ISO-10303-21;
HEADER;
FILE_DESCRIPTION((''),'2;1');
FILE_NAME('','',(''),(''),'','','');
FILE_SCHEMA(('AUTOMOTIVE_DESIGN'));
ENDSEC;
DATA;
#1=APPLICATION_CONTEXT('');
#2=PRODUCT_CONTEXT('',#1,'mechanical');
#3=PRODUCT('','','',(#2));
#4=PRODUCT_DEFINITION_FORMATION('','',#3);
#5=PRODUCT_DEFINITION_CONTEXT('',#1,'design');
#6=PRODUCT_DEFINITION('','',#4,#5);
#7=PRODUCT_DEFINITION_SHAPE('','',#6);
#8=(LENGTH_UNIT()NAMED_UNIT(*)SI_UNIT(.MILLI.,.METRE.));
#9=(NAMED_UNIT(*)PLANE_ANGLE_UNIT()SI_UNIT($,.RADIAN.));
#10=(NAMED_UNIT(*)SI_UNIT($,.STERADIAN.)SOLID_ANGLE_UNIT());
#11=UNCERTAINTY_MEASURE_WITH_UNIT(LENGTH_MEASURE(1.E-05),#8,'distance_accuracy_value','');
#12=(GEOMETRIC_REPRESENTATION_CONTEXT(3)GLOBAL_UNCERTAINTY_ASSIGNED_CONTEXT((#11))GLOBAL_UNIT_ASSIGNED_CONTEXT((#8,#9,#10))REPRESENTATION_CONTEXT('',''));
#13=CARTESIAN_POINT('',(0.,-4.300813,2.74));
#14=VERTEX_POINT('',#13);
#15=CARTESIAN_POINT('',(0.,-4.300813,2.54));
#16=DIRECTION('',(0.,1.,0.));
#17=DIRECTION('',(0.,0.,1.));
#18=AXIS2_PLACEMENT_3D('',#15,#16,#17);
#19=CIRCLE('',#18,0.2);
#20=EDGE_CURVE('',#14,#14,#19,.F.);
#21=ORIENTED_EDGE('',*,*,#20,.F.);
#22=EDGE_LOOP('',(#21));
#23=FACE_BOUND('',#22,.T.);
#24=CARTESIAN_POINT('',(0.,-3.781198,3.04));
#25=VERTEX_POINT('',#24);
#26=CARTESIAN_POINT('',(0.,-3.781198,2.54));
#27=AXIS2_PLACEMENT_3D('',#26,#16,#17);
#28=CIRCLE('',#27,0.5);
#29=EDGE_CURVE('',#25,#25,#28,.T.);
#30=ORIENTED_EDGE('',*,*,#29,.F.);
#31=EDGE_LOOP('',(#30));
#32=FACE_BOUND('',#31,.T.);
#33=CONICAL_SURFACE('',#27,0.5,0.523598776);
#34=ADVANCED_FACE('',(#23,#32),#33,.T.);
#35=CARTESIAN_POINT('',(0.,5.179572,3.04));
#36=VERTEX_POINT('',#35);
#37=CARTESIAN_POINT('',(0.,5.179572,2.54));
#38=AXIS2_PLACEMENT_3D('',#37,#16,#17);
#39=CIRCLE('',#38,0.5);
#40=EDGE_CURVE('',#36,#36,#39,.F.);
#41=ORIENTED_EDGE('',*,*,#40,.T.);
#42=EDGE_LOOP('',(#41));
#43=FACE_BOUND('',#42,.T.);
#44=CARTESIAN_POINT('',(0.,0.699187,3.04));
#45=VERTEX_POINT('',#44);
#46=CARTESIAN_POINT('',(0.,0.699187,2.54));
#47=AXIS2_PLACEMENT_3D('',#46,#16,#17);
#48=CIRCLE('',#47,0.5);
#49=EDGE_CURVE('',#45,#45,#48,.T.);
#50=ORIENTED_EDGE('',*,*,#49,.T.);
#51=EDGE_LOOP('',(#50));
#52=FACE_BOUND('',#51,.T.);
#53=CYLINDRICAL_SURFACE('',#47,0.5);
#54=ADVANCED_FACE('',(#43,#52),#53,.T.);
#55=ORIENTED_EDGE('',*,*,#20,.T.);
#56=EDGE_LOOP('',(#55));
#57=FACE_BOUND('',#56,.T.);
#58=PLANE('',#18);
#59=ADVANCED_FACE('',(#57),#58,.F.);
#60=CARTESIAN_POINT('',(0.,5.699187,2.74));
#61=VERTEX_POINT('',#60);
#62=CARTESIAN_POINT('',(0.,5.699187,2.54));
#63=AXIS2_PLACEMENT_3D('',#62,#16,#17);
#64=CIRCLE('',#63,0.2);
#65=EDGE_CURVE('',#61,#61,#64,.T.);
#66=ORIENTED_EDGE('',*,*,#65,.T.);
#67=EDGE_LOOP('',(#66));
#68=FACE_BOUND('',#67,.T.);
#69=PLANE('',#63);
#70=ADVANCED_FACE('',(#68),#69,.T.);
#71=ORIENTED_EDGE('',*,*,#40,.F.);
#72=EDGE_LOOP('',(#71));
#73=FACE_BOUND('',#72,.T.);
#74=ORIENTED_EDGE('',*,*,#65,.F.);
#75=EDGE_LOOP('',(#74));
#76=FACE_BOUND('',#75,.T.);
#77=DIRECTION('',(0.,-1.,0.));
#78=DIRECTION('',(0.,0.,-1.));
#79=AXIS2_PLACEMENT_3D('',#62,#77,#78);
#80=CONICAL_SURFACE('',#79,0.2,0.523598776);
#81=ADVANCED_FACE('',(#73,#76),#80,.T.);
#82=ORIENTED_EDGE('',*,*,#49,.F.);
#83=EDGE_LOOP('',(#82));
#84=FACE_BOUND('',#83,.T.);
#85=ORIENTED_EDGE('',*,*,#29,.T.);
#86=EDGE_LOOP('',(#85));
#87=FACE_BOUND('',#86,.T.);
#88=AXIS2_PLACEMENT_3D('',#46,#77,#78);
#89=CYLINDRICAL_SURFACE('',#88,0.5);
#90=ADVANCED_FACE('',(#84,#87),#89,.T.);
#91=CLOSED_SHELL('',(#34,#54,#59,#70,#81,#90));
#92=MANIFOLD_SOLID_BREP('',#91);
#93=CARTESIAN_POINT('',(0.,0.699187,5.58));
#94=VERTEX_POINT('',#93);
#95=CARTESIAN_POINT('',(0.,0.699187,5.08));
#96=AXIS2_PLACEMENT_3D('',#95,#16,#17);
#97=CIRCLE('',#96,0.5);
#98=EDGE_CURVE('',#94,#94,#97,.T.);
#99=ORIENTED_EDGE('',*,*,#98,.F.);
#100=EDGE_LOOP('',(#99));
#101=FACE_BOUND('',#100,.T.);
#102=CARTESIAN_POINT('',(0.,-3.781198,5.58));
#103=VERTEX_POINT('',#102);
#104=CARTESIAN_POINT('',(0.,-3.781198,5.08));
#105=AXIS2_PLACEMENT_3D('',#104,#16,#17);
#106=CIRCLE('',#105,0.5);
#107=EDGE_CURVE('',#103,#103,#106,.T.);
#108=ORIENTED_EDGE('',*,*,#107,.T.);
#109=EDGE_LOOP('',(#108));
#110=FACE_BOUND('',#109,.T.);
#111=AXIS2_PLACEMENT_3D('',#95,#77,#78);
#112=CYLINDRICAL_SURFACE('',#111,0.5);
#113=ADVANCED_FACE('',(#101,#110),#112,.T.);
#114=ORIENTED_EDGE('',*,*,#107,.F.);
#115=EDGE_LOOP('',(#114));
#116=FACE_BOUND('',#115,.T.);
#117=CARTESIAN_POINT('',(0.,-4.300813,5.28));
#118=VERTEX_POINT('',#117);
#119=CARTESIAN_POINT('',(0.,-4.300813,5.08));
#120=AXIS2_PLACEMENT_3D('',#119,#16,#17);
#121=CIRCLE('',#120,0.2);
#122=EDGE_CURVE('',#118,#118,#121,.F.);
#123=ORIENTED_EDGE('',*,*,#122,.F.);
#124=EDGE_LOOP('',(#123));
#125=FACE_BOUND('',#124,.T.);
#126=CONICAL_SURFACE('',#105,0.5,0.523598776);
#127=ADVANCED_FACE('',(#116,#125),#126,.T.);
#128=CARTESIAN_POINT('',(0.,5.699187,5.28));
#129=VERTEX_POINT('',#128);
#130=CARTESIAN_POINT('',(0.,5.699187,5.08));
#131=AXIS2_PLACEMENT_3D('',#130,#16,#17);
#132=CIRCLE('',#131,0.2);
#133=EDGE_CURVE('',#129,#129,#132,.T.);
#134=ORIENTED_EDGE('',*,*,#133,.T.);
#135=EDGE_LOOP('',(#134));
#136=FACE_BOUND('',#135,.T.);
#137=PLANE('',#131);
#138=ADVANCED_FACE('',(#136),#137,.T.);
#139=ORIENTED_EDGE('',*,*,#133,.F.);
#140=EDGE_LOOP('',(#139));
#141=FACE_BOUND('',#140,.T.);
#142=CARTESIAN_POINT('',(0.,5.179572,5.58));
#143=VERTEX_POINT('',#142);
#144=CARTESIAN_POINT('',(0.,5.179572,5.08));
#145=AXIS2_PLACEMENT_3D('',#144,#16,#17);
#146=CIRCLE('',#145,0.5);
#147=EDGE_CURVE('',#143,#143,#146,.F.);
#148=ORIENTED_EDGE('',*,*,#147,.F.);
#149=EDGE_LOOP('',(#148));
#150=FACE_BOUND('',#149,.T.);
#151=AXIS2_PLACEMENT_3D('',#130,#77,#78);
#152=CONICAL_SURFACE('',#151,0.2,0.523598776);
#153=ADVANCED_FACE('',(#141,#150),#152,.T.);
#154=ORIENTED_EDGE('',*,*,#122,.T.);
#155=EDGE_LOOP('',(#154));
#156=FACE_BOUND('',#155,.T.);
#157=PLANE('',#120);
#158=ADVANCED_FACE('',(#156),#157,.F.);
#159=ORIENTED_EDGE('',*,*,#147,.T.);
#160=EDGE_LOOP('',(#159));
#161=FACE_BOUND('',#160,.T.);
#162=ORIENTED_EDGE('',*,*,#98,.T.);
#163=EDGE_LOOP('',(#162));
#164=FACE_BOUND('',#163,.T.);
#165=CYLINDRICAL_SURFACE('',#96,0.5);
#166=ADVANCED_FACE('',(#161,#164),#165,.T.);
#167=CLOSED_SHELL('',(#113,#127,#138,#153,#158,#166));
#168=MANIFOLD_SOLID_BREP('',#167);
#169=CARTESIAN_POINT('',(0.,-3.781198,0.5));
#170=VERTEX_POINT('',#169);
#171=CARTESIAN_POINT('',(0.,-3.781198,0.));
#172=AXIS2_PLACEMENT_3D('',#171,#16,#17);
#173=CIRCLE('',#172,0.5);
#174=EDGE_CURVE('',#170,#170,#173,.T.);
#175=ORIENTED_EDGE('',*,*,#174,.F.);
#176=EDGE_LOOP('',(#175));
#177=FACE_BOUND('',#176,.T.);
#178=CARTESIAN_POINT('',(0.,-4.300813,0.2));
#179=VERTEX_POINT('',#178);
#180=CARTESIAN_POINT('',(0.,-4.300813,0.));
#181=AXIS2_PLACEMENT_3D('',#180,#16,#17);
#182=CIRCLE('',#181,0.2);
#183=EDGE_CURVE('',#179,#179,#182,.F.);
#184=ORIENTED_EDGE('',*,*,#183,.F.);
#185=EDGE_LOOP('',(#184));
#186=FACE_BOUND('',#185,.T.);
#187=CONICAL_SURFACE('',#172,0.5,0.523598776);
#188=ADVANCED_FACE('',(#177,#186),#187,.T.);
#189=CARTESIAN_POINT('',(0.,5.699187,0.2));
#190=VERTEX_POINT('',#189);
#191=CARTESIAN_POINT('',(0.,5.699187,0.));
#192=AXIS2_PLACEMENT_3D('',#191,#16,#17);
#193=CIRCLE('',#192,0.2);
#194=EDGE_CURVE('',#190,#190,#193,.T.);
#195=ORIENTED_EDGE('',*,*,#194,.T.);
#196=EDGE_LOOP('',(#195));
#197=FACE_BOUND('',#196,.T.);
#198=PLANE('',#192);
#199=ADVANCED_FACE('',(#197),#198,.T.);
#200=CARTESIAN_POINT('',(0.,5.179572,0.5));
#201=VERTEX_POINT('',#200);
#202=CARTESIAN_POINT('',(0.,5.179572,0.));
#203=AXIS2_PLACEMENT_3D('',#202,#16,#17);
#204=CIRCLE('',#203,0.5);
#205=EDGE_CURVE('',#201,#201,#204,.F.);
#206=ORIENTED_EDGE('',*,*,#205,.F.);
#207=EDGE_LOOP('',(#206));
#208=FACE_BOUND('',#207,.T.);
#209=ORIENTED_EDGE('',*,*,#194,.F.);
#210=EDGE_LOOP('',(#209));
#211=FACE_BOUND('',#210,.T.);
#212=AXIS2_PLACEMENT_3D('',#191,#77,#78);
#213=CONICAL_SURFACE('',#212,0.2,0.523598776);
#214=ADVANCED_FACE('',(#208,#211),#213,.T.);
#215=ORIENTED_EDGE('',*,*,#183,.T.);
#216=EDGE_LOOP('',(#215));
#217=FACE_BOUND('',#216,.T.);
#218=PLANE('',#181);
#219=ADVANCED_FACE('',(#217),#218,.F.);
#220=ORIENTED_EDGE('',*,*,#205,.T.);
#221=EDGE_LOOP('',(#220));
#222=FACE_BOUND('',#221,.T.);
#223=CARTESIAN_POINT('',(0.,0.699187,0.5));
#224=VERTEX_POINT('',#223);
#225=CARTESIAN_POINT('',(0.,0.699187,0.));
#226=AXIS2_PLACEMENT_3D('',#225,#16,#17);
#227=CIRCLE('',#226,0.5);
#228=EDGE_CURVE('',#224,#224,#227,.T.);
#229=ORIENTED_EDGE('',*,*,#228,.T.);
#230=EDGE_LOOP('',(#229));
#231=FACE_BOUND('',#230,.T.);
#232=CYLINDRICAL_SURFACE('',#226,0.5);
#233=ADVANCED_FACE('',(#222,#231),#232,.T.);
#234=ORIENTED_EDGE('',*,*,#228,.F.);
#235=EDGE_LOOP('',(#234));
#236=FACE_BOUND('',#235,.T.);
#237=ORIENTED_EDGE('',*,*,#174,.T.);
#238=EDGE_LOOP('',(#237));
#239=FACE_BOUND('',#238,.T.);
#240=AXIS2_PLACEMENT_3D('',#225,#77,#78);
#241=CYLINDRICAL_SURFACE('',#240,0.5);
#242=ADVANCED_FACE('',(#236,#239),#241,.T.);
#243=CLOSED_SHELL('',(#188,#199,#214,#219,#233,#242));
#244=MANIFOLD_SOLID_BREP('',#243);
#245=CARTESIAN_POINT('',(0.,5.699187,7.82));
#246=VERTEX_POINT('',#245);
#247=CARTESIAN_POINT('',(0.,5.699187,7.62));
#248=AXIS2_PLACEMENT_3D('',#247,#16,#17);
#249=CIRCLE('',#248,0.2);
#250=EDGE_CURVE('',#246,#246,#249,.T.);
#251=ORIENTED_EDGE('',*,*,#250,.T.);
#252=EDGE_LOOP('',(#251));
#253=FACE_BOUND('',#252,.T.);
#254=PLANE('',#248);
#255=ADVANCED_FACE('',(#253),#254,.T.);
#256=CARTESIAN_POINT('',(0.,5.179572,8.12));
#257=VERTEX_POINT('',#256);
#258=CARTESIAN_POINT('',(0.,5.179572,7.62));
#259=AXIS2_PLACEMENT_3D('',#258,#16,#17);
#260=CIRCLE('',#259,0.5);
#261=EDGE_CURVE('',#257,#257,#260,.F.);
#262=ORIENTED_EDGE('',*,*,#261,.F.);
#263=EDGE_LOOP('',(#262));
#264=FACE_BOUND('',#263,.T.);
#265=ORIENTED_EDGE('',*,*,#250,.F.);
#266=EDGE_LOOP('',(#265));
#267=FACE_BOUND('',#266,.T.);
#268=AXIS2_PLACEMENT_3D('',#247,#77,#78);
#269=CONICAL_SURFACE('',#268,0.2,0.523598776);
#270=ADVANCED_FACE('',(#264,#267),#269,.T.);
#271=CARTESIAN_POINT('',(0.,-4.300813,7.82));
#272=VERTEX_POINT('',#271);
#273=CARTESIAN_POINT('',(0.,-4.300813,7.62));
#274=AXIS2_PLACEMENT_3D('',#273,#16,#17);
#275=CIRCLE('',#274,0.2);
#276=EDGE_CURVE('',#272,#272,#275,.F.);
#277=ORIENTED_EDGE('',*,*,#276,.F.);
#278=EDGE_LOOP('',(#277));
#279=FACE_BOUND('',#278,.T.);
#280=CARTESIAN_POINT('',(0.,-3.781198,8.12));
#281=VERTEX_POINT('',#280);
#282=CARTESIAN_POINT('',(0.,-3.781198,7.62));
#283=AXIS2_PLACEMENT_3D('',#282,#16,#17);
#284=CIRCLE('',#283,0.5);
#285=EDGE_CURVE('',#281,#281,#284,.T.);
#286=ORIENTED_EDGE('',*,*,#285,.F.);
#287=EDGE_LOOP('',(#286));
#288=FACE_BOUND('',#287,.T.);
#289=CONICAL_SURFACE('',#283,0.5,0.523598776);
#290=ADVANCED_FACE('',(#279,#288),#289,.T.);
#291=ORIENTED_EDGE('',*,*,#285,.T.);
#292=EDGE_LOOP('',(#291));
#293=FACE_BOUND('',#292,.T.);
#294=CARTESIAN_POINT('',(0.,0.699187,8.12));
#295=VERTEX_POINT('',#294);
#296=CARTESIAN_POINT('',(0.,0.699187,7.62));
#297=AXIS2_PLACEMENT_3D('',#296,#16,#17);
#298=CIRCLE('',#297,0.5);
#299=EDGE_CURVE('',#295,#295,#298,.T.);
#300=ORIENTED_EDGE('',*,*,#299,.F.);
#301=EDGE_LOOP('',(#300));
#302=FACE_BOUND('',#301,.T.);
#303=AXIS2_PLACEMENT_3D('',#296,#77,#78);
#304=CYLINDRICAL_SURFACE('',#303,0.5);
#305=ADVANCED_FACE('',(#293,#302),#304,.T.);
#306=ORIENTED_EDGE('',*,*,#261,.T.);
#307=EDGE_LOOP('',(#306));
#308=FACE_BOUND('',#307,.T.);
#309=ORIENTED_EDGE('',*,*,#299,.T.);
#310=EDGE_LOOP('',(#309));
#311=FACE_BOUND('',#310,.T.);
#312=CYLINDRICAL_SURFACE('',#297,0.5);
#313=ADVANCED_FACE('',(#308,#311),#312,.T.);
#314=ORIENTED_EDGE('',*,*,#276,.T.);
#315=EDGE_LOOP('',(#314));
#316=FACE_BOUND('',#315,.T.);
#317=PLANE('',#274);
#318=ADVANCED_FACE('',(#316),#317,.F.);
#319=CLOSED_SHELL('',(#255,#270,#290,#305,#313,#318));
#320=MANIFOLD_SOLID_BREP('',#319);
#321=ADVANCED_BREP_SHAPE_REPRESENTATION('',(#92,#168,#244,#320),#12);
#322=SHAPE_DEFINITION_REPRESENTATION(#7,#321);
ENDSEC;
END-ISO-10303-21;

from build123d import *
from OCP.BRepFilletAPI import BRepFilletAPI_MakeChamfer

# Parameters (mm, degrees)
SWEEP1_START     = -4.300813064
SWEEP1_OUTLINE_R = 0.5
SWEEP1_DEPTH     = 10
CHAMFER1_SIZE    = 0.3
CHAMFER1_SIZE2   = 0.519615242
LPATTERN1_COUNT  = 4
LPATTERN1_PITCH  = 2.54


# Read off the part's stored shape, not the designer's step: Sweep1
with BuildPart() as part:
    # Sweep1 outline → Sweep1 (new body)
    with BuildSketch(Plane(origin=(0, 0, 0), x_dir=(1, 0, 0), z_dir=(0, 1, 0)).offset(SWEEP1_START)):
        Circle(SWEEP1_OUTLINE_R)
    extrude(amount=SWEEP1_DEPTH)

    # Chamfer1: one chamfer whose edges measure the first distance from different faces: ONE call of the kernel's chamfer builder (chamfer() names one face for all edges)
    chamfer1_edges_1 = [part.edges().sort_by_distance(p)[0] for p in [
        (-0.5, -4.300813064, 0),
    ]]
    chamfer1_side_1 = [part.faces().sort_by_distance(p)[0] for p in [
        (0, -4.300813064, 0),
    ]]
    chamfer1_edges_2 = [part.edges().sort_by_distance(p)[0] for p in [
        (-0.5, 5.699186936, 0),
    ]]
    chamfer1_side_2 = [part.faces().sort_by_distance(p)[0] for p in [
        (0, 5.699186936, 0),
    ]]
    chamfer1 = BRepFilletAPI_MakeChamfer(part.part.solid().wrapped)
    for e in chamfer1_edges_1:
        chamfer1.Add(CHAMFER1_SIZE, CHAMFER1_SIZE2, e.wrapped, chamfer1_side_1[0].wrapped)  # the first distance lies on this face
    for e in chamfer1_edges_2:
        chamfer1.Add(CHAMFER1_SIZE, CHAMFER1_SIZE2, e.wrapped, chamfer1_side_2[0].wrapped)  # the first distance lies on this face
    add(Compound.cast(chamfer1.Shape()), mode=Mode.REPLACE)


with BuildPart() as lpattern1_1:
    # LPattern1: pattern copy
    add(part.part.moved(Location(Vector(0, 0, 1) * (1 * LPATTERN1_PITCH))))


with BuildPart() as lpattern1_2:
    # LPattern1: pattern copy
    add(part.part.moved(Location(Vector(0, 0, 1) * (2 * LPATTERN1_PITCH))))


with BuildPart() as lpattern1_3:
    # LPattern1: pattern copy
    add(part.part.moved(Location(Vector(0, 0, 1) * (3 * LPATTERN1_PITCH))))


solid = Compound([part.part, lpattern1_1.part, lpattern1_2.part, lpattern1_3.part])
